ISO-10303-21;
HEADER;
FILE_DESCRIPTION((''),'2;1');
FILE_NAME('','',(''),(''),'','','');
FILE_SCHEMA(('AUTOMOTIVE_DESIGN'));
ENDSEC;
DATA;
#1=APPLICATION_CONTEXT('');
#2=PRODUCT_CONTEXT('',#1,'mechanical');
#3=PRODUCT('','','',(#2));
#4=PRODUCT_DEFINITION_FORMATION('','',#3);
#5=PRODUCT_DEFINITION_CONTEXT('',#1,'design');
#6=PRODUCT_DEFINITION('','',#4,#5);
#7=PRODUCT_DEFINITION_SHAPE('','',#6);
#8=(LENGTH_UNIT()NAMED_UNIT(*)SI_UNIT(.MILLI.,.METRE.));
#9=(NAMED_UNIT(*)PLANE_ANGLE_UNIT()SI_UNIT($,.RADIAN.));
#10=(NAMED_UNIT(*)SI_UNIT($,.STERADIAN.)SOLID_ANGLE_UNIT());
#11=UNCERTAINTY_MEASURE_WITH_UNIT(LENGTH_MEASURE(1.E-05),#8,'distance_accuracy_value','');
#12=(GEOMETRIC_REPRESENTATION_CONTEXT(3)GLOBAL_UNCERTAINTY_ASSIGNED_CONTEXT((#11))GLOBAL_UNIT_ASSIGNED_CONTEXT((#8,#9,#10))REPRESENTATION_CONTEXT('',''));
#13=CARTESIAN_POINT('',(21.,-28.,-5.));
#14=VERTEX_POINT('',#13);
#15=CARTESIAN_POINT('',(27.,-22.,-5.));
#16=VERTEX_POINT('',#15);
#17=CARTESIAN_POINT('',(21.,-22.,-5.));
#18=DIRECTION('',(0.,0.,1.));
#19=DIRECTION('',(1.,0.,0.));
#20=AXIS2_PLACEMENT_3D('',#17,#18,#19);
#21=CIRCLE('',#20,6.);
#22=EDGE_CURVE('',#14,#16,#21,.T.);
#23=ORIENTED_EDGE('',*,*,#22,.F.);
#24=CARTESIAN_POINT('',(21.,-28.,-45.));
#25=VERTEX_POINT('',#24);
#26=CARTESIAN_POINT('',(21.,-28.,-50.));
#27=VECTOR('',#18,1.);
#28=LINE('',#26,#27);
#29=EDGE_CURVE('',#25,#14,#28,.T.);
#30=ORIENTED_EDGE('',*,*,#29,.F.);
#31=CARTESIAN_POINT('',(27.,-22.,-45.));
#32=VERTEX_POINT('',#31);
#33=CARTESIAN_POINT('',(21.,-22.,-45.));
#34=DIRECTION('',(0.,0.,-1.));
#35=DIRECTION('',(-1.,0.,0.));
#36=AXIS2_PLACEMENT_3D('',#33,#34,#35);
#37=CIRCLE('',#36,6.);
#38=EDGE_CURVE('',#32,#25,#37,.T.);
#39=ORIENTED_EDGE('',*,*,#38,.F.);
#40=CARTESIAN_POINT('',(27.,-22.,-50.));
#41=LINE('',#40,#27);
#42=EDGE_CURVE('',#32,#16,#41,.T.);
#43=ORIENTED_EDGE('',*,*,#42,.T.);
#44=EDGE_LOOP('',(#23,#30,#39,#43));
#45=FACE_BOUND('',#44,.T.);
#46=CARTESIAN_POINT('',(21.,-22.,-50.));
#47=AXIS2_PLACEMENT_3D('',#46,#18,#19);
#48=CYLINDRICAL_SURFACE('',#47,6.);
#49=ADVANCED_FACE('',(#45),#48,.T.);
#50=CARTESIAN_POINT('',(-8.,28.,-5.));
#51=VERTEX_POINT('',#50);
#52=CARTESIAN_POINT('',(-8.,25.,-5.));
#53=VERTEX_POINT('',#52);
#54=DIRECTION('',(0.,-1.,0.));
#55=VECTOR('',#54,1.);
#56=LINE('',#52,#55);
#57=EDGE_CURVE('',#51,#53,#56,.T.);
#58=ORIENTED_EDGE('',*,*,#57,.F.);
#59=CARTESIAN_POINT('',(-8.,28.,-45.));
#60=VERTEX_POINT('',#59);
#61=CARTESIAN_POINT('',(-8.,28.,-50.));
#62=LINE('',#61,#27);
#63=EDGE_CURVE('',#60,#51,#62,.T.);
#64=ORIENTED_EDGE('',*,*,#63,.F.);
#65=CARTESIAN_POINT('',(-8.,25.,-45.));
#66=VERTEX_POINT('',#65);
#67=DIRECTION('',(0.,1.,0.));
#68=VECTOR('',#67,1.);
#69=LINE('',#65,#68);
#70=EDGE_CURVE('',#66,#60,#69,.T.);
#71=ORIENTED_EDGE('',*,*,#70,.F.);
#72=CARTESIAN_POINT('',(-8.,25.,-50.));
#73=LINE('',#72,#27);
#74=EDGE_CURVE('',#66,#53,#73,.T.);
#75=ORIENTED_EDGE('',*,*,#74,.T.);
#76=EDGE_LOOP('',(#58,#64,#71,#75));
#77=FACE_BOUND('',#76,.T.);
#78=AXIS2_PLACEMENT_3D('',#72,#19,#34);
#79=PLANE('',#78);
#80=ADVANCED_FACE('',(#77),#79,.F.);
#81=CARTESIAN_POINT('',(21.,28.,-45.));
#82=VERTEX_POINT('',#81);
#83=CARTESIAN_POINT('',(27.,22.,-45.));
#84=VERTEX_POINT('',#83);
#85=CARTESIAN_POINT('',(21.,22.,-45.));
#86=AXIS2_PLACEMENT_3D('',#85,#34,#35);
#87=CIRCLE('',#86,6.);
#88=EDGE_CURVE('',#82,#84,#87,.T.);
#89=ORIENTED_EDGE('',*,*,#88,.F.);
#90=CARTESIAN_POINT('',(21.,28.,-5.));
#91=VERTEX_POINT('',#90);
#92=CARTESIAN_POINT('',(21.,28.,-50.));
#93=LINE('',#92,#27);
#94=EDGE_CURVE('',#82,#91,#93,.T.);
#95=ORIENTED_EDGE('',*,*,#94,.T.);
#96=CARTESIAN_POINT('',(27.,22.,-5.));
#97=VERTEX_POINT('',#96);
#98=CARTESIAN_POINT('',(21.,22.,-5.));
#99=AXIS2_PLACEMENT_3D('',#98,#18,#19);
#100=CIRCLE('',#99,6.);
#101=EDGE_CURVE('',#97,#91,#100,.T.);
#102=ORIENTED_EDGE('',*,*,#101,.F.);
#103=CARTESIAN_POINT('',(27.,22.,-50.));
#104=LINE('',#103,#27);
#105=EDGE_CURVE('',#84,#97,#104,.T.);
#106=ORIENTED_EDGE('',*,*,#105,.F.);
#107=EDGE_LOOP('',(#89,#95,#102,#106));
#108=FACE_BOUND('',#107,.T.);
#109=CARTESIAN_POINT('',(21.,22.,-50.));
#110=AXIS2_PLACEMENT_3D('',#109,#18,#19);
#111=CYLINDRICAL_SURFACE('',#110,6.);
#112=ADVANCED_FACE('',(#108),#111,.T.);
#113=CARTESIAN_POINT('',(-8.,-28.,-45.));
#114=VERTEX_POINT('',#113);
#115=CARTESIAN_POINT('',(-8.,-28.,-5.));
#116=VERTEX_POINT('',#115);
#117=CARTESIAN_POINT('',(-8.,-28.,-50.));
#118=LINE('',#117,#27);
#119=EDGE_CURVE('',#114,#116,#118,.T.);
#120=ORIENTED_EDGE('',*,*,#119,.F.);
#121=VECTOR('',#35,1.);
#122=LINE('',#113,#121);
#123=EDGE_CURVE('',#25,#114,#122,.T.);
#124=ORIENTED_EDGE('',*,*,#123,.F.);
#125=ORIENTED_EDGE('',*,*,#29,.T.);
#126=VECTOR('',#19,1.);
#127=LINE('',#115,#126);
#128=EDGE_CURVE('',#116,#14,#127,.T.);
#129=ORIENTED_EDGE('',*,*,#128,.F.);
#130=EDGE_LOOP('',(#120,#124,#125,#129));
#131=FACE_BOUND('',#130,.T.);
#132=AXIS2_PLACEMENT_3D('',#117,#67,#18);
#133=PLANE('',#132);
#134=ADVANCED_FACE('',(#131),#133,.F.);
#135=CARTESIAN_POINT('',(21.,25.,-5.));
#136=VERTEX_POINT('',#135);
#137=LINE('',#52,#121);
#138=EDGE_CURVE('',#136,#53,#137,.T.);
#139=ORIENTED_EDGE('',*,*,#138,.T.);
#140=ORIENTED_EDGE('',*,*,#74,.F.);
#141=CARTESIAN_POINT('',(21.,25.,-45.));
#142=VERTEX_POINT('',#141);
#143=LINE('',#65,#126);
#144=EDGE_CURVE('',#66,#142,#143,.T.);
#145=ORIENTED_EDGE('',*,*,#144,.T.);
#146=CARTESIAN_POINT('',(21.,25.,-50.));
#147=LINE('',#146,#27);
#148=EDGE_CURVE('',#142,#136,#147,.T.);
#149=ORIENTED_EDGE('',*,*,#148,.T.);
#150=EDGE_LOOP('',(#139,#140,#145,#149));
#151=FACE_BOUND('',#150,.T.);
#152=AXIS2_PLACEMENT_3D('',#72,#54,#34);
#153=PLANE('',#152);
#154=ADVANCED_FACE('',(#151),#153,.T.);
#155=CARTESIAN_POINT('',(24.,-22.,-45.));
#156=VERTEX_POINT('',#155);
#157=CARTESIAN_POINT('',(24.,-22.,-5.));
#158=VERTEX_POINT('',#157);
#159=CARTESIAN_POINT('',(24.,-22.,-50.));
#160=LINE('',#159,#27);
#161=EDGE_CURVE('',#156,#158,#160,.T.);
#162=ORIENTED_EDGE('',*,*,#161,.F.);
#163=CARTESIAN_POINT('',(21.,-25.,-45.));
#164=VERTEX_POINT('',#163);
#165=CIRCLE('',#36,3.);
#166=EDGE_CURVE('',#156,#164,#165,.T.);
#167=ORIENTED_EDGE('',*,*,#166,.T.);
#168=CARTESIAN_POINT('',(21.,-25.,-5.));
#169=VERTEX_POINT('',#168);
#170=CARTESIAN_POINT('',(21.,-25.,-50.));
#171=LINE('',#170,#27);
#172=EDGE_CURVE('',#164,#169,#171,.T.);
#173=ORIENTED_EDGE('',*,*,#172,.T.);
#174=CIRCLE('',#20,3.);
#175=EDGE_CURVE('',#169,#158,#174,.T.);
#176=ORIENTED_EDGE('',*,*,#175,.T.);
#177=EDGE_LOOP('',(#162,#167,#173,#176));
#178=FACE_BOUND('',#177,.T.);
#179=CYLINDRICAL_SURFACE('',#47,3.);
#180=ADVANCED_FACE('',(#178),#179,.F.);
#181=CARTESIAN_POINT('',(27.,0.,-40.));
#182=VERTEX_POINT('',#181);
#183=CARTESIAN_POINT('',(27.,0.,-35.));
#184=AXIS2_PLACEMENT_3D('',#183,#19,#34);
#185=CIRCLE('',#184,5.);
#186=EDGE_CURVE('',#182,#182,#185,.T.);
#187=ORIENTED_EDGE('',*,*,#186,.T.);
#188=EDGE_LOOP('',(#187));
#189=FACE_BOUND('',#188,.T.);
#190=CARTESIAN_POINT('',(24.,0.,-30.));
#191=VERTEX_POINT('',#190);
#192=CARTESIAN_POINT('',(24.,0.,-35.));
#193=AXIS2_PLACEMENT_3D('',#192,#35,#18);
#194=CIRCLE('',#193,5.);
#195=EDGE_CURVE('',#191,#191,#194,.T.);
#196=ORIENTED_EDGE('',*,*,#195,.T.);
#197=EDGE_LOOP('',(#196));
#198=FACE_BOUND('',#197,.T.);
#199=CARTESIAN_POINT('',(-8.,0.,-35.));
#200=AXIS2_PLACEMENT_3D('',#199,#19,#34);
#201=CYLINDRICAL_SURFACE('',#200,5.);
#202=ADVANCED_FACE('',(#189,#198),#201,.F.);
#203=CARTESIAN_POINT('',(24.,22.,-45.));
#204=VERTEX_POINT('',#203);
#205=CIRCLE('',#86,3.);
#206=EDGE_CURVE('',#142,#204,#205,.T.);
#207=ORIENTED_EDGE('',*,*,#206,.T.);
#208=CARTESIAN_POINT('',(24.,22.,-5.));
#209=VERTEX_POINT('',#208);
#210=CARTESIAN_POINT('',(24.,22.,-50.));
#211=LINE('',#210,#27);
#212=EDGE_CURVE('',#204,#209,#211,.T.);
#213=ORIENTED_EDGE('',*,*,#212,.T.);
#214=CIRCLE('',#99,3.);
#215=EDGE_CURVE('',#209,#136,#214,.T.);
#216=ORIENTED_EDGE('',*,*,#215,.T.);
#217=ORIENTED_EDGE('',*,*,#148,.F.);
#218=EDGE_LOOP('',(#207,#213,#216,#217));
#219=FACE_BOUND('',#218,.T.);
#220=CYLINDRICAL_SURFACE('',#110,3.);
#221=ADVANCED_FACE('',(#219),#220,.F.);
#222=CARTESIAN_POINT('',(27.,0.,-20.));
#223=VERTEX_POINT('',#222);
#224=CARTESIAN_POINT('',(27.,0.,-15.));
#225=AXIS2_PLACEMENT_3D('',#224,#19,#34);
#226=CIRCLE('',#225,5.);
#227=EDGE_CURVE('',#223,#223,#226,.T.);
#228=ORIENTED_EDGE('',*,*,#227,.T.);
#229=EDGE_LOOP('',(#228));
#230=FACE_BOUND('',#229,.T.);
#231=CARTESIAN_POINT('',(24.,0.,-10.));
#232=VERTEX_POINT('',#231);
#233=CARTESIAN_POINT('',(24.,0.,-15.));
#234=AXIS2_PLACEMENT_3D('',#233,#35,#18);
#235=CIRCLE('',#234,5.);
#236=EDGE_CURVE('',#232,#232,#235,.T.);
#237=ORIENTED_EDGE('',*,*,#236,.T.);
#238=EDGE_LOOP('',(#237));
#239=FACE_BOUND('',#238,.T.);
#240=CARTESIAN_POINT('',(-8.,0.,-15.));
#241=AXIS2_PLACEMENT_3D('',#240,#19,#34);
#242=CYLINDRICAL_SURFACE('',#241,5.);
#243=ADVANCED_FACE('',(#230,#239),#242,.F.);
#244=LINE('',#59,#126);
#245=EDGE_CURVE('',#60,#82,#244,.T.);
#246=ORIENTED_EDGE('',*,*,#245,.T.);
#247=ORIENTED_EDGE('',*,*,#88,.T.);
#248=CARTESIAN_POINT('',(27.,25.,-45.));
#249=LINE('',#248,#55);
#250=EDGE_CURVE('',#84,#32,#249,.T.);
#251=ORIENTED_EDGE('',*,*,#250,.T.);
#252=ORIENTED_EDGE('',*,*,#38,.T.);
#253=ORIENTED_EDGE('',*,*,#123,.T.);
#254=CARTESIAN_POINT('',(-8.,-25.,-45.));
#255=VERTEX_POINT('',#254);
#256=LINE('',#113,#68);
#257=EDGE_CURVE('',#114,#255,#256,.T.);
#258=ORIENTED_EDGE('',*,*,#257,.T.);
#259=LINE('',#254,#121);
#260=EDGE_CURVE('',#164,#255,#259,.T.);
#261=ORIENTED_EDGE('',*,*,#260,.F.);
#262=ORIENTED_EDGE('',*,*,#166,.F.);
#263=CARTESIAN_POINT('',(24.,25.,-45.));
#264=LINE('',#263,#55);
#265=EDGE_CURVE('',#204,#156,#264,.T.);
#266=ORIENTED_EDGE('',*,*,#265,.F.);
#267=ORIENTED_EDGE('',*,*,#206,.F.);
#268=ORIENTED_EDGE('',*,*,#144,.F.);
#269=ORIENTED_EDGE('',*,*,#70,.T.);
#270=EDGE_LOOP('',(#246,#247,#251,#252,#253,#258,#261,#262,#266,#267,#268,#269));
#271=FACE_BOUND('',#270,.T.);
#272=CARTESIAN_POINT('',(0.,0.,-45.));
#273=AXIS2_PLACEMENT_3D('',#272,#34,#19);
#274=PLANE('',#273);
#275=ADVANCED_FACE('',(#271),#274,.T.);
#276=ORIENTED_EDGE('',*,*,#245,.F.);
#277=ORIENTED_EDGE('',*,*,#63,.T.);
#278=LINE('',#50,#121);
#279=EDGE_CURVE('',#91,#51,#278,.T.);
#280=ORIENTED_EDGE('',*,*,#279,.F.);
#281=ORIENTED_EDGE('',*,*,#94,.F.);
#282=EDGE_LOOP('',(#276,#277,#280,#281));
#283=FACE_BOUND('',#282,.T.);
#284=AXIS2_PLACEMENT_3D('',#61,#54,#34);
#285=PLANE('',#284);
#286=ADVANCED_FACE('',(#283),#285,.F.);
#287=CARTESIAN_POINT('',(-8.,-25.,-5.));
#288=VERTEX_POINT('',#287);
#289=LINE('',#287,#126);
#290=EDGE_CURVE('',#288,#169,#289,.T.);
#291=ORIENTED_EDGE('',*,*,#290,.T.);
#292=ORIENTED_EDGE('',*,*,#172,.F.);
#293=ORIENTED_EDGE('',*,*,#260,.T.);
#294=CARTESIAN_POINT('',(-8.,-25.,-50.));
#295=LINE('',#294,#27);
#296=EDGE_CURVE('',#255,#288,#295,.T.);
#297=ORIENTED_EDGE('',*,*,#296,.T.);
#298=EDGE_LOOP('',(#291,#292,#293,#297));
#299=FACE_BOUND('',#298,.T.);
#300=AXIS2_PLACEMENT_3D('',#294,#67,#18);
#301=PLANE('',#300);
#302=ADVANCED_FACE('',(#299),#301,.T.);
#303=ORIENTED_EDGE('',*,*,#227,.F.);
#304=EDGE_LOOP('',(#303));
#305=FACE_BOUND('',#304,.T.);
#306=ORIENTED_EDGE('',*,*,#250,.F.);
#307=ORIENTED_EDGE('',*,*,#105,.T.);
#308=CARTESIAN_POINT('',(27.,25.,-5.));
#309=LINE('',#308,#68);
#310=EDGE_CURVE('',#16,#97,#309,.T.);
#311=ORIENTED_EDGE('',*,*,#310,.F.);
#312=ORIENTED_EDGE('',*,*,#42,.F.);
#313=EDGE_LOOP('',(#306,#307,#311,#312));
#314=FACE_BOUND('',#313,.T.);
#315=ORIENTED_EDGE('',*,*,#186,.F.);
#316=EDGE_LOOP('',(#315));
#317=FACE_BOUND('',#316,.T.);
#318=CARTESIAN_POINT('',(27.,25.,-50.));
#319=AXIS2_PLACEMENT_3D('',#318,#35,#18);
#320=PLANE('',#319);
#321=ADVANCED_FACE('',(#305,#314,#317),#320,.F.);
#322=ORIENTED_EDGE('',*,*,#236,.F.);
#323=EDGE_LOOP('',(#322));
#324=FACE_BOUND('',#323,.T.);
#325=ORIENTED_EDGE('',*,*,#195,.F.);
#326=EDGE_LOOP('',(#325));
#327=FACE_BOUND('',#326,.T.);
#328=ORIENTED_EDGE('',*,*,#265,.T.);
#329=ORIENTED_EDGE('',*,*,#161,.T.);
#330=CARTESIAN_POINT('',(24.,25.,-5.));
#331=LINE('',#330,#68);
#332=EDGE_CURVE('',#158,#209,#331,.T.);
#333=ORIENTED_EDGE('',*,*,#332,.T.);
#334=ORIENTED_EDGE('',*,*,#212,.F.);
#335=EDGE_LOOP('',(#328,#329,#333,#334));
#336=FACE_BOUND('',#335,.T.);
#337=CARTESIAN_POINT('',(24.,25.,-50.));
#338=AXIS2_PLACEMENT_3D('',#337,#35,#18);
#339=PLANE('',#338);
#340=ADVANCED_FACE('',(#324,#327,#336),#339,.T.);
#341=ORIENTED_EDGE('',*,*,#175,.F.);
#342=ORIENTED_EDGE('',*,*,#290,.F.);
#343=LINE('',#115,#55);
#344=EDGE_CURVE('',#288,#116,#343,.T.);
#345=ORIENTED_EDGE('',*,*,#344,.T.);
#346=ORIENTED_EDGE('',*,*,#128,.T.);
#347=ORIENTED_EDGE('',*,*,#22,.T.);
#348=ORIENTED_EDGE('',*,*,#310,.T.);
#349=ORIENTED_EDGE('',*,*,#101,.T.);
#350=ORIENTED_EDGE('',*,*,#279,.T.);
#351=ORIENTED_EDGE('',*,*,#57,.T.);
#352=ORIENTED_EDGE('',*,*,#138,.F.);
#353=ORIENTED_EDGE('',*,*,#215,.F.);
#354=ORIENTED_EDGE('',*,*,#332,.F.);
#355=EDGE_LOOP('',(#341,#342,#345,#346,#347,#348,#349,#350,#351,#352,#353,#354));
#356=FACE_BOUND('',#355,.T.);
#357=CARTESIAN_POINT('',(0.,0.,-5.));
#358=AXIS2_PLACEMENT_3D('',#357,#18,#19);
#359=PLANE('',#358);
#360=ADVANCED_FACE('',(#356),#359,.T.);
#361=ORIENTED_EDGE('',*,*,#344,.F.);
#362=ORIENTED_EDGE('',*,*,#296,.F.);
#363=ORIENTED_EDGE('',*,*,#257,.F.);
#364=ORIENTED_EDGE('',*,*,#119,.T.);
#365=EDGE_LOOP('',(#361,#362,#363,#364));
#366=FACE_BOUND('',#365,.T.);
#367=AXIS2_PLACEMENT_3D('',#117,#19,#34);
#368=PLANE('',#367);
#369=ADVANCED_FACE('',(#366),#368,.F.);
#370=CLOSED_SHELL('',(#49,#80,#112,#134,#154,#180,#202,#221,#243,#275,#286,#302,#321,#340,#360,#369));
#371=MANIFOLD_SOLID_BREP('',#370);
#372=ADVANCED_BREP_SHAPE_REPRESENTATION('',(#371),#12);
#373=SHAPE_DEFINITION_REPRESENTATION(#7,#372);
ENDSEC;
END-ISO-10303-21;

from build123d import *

# Parameters (mm, degrees)
BASE_FLANGE1_DEPTH = 50
SKETCH10_R         = 5
CUT_EXTRUDE2_DEPTH = 68.149087857
FILLET1_R          = 3
SKETCH11_W         = 62.490132504
SKETCH11_H         = 65.671220534
CUT_EXTRUDE4_DEPTH = 5


# Sheet-metal steps are written as plain solids
with BuildPart() as part:
    # Sketch3 → Base-Flange1 (new body)
    with BuildSketch(Plane.XY):
        with BuildLine():
            Line((-8, -25), (21, -25))
            ThreePointArc((21, -25), (23.121320344, -24.121320344), (24, -22))
            Line((24, -22), (24, 22))
            ThreePointArc((24, 22), (23.121320344, 24.121320344), (21, 25))
            Line((21, 25), (-8, 25))
            Line((-8, 25), (-8, 28))
            Line((-8, 28), (21, 28))
            ThreePointArc((21, 28), (25.242640687, 26.242640687), (27, 22))
            Line((27, 22), (27, -22))
            ThreePointArc((27, -22), (25.242640687, -26.242640687), (21, -28))
            Line((21, -28), (-8, -28))
            Line((-8, -28), (-8, -25))
        make_face()
    extrude(amount=-BASE_FLANGE1_DEPTH)

    # Sketch10 → Cut-Extrude2 (cut, through all)
    with BuildSketch(Plane(origin=(27, 0, 0), x_dir=(0, 0, -1), z_dir=(1, 0, 0))):
        with Locations((15, 0)):
            Circle(SKETCH10_R)
        with Locations((35, 0)):
            Circle(SKETCH10_R)
    extrude(amount=-CUT_EXTRUDE2_DEPTH, mode=Mode.SUBTRACT)

    # Fillet1
    fillet1_edges = [part.edges().sort_by_distance(p)[0] for p in [
        (-8, 26.5, 0),
        (-8, -26.5, 0),
        (-8, 26.5, -50),
        (-8, -26.5, -50),
    ]]
    fillet(fillet1_edges, radius=FILLET1_R)

    # Sketch11 → Cut-Extrude4 (cut)
    with BuildSketch(Plane.XY):
        Rectangle(SKETCH11_W, SKETCH11_H)
    cut_extrude4 = extrude(amount=-CUT_EXTRUDE4_DEPTH, mode=Mode.SUBTRACT)

    # Mirror1: Cut-Extrude4 across plane
    add(cut_extrude4.mirror(Plane.XY.offset(-25)), mode=Mode.SUBTRACT)


solid = part.part
